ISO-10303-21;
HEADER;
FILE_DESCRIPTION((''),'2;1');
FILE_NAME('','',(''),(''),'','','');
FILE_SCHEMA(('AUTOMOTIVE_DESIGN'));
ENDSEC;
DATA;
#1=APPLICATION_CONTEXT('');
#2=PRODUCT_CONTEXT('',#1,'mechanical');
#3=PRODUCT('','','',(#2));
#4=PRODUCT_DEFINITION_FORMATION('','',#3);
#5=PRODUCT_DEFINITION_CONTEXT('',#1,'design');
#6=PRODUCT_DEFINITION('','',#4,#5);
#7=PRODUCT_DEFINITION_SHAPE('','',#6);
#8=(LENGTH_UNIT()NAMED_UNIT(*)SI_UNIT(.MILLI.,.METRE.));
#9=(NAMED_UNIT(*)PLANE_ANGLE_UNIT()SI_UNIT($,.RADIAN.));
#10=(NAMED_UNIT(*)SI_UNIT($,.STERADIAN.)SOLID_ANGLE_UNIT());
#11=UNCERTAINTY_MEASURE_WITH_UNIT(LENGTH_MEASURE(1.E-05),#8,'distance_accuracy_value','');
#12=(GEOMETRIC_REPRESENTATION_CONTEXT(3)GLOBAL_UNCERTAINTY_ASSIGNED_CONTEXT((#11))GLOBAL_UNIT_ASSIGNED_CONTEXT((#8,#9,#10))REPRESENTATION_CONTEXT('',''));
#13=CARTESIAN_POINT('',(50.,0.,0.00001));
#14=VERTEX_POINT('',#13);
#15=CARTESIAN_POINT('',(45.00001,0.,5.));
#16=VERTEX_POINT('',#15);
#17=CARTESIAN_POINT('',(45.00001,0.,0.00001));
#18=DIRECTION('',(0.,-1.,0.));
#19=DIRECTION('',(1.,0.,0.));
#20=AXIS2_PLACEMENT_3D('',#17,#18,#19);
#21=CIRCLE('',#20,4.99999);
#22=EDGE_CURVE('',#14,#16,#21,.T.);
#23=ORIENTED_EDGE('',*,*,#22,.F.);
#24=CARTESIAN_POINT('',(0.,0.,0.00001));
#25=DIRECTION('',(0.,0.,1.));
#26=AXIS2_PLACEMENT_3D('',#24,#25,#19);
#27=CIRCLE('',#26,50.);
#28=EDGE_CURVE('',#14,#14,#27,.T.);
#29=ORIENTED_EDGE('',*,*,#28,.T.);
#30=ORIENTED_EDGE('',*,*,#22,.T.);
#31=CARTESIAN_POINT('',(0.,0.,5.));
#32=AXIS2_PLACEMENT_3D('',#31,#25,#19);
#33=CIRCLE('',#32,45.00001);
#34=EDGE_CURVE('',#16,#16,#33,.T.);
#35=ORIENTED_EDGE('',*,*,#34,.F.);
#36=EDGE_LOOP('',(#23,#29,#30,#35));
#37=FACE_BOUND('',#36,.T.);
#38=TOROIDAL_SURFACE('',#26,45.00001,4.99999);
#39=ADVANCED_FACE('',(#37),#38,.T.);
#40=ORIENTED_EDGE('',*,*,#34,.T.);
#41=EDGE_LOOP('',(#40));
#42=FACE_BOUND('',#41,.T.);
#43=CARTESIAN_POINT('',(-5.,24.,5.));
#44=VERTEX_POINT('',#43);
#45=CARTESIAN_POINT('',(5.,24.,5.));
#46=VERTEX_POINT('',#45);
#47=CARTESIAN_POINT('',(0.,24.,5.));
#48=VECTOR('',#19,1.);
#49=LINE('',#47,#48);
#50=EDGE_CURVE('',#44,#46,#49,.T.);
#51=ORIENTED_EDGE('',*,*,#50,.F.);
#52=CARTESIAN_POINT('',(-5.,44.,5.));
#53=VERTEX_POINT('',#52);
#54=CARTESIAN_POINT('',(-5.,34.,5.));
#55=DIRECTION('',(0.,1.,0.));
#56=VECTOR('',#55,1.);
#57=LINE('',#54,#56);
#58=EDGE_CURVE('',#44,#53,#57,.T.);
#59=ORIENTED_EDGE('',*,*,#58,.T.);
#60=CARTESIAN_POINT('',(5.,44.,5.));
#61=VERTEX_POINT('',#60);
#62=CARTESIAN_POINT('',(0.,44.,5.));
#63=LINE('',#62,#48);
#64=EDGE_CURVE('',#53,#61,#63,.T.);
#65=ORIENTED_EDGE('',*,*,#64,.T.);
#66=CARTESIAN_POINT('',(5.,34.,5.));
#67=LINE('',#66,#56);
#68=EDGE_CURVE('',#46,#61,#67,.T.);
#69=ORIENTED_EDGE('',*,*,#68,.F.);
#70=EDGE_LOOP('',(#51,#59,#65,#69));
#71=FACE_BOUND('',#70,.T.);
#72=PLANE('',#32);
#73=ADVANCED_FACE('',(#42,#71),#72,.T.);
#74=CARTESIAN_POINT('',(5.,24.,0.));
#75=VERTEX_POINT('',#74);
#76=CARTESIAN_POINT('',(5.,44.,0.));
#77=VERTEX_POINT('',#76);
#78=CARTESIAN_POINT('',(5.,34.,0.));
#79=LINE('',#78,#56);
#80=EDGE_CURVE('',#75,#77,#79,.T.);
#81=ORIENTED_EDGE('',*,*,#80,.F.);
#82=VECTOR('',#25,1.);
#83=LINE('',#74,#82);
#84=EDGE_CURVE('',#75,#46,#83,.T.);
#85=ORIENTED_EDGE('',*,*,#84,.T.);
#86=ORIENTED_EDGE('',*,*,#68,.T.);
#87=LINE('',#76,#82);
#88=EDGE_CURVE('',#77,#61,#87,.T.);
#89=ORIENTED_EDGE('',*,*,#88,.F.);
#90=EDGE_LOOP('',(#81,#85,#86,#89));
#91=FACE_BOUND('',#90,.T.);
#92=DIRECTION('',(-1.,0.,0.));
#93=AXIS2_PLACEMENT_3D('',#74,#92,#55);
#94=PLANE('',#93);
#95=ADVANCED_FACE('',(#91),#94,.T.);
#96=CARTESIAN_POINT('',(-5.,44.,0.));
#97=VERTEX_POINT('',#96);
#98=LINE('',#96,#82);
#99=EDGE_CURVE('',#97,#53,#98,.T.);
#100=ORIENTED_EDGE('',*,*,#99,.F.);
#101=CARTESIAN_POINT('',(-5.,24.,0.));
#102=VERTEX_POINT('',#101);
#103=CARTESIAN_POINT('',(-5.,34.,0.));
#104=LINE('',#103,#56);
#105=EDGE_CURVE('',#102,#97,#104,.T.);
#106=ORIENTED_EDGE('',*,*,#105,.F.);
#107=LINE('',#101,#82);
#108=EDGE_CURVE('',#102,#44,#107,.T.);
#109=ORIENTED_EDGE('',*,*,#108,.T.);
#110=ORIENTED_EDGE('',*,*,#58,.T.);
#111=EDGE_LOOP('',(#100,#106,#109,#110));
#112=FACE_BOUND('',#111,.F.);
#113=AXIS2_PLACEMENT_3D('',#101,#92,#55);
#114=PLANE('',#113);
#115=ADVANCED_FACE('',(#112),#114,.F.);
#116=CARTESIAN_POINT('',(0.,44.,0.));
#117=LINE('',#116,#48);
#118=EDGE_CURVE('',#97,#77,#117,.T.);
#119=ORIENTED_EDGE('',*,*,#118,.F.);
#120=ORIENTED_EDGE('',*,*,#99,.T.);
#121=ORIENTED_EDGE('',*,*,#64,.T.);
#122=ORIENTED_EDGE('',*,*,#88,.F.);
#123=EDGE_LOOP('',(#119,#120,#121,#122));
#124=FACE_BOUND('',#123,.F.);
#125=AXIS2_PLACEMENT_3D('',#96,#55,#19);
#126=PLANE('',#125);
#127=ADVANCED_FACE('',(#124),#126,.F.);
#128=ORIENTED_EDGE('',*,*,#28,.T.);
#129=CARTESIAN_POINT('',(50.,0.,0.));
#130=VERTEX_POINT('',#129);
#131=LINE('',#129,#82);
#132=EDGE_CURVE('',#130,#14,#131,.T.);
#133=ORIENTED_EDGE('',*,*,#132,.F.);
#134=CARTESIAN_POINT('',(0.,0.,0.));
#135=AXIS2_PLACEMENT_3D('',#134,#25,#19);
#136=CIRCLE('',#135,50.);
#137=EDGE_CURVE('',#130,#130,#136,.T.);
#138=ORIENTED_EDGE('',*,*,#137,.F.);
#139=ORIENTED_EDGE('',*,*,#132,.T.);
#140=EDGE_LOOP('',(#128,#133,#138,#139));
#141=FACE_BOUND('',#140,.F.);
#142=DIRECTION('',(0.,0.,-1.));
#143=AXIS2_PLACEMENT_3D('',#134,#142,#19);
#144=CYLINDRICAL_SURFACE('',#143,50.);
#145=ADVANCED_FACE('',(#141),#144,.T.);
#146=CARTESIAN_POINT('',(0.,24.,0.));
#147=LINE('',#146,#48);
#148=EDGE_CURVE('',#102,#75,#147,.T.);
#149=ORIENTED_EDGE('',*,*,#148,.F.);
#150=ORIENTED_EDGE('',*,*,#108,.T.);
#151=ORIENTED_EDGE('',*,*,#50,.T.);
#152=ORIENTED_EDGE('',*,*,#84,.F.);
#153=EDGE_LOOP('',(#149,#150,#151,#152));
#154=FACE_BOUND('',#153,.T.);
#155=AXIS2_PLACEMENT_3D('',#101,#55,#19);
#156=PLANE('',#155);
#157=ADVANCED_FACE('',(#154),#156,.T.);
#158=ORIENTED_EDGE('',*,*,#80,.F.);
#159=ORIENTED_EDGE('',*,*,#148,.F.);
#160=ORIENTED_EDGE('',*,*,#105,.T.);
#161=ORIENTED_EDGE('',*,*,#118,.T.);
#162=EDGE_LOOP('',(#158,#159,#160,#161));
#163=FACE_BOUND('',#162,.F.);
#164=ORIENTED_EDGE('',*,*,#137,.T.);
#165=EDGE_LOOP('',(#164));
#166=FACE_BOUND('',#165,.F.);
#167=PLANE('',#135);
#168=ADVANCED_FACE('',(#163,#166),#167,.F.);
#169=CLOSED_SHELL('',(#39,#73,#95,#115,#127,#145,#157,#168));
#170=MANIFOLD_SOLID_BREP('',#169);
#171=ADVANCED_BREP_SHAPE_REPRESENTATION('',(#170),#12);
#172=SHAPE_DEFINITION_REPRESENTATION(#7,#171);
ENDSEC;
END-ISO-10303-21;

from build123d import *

# Parameters (mm, degrees)
F0_R     = 50
F0_W     = 10
F0_H     = 20
F1_DEPTH = 5
F2_R     = 4.99999


# Not quite as in the source:
# - a fillet or chamfer is up to 0.001 mm smaller than in the source, because OpenCascade refuses the exact size


with BuildPart() as f1:
    # F0 (on Top) → F1 (new body)
    with BuildSketch(Plane.XY):
        Circle(F0_R)
        with Locations((0, 34)):
            Rectangle(F0_W, F0_H, mode=Mode.SUBTRACT)
    extrude(amount=F1_DEPTH)

    # F2 (radius 5 in the source; OpenCascade refuses exactly that, so slightly less here)
    f2_edges = [f1.edges().sort_by_distance(p)[0] for p in [
        (-50, 0, 5),
    ]]
    fillet(f2_edges, radius=F2_R)


solid = f1.part
